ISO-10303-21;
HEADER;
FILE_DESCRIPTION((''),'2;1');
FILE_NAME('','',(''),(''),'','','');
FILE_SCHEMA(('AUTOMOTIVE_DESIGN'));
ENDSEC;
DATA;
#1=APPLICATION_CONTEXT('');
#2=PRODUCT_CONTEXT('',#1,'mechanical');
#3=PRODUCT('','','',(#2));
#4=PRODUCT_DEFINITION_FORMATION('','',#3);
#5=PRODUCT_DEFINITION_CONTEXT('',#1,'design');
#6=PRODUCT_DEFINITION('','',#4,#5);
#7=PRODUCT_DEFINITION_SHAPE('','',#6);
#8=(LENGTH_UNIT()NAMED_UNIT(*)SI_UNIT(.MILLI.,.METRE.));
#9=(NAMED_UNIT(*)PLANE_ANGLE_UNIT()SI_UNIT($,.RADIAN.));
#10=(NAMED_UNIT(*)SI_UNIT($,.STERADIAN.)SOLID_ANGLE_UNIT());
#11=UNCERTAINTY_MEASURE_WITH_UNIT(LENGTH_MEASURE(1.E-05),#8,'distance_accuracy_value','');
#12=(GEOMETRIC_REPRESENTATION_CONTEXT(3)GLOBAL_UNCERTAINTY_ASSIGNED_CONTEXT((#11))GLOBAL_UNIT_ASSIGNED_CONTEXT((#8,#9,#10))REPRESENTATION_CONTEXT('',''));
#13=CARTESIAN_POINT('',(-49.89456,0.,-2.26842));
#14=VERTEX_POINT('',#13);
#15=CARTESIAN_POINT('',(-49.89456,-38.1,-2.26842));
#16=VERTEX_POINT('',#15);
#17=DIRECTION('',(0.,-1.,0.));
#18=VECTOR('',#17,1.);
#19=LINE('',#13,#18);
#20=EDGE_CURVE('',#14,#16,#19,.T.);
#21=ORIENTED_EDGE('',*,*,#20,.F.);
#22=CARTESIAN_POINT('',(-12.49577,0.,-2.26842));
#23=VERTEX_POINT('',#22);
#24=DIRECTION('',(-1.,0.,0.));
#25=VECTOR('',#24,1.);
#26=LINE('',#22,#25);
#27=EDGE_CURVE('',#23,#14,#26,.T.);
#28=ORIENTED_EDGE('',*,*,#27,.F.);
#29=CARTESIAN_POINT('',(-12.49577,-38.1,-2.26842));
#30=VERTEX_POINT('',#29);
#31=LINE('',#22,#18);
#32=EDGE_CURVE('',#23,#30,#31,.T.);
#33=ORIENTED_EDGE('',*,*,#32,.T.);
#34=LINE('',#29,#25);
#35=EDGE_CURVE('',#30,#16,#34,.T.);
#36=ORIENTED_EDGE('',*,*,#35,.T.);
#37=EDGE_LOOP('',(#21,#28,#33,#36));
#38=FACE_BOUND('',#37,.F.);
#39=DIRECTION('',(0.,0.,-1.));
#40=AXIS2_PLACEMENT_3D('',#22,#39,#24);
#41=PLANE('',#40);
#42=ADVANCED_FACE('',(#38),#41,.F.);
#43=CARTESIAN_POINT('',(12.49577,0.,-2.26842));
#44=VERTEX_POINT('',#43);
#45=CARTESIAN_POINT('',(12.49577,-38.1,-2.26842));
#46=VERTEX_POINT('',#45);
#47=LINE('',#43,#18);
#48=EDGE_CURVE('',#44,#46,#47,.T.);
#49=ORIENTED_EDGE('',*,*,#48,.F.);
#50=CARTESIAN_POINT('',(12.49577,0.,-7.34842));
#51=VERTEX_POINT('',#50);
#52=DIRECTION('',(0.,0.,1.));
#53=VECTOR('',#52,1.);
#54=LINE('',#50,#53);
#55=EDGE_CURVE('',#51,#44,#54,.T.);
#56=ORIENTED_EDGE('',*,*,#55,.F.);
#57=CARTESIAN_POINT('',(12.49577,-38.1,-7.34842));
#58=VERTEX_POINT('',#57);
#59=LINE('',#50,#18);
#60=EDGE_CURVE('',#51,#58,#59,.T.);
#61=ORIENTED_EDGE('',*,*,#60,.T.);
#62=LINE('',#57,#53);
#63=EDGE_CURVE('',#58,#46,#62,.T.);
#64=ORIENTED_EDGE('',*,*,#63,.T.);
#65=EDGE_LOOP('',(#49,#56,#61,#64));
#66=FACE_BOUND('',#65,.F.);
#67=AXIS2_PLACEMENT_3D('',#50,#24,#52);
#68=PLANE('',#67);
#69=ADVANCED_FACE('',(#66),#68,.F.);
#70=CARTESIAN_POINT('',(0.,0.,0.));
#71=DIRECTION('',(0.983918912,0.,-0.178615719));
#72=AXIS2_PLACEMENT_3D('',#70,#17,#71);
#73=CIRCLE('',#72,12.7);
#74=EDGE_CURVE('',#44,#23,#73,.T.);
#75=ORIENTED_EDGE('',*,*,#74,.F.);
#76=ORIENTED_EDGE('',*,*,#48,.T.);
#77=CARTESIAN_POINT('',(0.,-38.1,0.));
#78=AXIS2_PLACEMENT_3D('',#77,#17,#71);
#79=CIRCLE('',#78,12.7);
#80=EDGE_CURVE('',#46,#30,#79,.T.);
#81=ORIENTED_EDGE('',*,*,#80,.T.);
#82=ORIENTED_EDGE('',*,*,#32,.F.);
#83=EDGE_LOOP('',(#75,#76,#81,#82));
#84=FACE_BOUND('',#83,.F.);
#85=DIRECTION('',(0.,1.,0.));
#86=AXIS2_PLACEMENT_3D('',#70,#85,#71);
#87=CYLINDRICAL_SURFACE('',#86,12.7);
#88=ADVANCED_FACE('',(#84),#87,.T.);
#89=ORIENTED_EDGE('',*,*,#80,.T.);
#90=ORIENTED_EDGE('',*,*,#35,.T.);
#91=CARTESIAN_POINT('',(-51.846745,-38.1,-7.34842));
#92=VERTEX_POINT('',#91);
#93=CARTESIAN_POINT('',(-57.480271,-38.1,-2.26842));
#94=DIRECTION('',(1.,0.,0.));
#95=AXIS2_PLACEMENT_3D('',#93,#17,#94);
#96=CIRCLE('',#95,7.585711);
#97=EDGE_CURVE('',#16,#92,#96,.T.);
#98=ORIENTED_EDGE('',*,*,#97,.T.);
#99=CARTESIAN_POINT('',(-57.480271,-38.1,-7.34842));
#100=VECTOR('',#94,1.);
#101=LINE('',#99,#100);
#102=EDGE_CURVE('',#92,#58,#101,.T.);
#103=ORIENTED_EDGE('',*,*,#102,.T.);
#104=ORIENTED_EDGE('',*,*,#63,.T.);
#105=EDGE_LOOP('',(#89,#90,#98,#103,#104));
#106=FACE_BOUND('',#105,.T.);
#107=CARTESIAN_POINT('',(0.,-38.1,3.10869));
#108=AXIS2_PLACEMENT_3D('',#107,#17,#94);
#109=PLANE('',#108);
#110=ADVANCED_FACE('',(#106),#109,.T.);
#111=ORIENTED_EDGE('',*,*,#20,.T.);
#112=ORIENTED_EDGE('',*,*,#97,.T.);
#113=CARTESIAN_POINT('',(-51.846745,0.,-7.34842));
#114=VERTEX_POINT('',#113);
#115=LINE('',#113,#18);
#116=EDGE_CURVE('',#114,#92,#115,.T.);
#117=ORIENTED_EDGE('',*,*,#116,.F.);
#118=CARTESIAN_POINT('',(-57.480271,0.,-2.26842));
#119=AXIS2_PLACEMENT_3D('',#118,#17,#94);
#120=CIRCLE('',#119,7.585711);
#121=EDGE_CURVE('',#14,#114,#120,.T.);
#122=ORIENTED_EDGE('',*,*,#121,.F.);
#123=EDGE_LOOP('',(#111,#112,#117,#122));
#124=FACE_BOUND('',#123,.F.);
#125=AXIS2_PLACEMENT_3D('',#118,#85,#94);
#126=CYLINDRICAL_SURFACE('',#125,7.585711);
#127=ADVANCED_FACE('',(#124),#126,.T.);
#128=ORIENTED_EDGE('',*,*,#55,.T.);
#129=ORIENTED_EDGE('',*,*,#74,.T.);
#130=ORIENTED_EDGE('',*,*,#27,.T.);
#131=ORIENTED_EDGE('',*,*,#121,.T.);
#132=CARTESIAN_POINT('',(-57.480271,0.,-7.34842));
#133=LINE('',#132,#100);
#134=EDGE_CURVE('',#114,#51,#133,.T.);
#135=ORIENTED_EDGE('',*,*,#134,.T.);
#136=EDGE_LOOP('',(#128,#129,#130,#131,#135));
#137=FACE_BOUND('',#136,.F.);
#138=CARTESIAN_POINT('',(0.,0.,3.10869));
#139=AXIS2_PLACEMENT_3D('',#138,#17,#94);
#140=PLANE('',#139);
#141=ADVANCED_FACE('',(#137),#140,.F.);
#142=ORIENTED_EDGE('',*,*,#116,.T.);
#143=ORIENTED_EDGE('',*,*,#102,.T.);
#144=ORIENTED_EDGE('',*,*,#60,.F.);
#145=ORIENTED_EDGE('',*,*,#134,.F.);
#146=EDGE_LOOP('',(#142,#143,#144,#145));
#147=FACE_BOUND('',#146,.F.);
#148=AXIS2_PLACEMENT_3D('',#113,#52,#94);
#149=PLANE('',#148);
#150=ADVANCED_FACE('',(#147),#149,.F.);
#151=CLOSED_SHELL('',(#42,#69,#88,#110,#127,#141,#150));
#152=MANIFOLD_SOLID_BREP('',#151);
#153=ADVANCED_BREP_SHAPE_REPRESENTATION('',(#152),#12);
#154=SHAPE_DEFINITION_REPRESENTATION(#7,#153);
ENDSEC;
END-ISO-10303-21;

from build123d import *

# Parameters (mm, degrees)
F1_DEPTH = 38.1


# Not quite as in the source:
# - the program builds the solid bodies; features that only make, move or delete a surface that nothing else refers to are left out


with BuildPart() as f1:
    # F0 (on Front) → F1 (new body)
    with BuildSketch(Plane.XZ):
        with BuildLine():
            Line((-12.4957701793, -2.2684196318), (12.4957701793, -2.2684196318))
            ThreePointArc((12.4957701793, -2.2684196318), (0, 12.7), (-12.4957701793, -2.2684196318))
        make_face()
        with BuildLine():
            Line((12.4957701793, -7.3484196318), (12.4957701793, -2.2684196318))
            Line((12.4957701793, -2.2684196318), (-12.4957701793, -2.2684196318))
            Line((-12.4957701793, -2.2684196318), (-49.8945600124, -2.2684196318))
            ThreePointArc((-49.8945600124, -2.2684196318), (-50.3994056233, -4.9895144213), (-51.8467453044, -7.3484196318))
            Line((-51.8467453044, -7.3484196318), (12.4957701793, -7.3484196318))
        make_face()
        with BuildLine():
            ThreePointArc((-51.8467453044, -7.3484196318), (-50.3994056233, -4.9895144213), (-49.8945600124, -2.2684196318))
            Line((-49.8945600124, -2.2684196318), (-57.4802711475, -2.2684196318))
            Line((-57.4802711475, -2.2684196318), (-57.4802711475, -7.3484196318))
            Line((-57.4802711475, -7.3484196318), (-51.8467453044, -7.3484196318))
        make_face()
        with BuildLine():
            Line((-57.4802711475, -2.2684196318), (-49.8945600124, -2.2684196318))
            ThreePointArc((-49.8945600124, -2.2684196318), (-64.5611366718, 0.4526751578), (-51.8467453044, -7.3484196318))
            Line((-51.8467453044, -7.3484196318), (-57.4802711475, -7.3484196318))
            Line((-57.4802711475, -7.3484196318), (-57.4802711475, -2.2684196318))
        make_face()
    extrude(amount=F1_DEPTH)


solid = f1.part
